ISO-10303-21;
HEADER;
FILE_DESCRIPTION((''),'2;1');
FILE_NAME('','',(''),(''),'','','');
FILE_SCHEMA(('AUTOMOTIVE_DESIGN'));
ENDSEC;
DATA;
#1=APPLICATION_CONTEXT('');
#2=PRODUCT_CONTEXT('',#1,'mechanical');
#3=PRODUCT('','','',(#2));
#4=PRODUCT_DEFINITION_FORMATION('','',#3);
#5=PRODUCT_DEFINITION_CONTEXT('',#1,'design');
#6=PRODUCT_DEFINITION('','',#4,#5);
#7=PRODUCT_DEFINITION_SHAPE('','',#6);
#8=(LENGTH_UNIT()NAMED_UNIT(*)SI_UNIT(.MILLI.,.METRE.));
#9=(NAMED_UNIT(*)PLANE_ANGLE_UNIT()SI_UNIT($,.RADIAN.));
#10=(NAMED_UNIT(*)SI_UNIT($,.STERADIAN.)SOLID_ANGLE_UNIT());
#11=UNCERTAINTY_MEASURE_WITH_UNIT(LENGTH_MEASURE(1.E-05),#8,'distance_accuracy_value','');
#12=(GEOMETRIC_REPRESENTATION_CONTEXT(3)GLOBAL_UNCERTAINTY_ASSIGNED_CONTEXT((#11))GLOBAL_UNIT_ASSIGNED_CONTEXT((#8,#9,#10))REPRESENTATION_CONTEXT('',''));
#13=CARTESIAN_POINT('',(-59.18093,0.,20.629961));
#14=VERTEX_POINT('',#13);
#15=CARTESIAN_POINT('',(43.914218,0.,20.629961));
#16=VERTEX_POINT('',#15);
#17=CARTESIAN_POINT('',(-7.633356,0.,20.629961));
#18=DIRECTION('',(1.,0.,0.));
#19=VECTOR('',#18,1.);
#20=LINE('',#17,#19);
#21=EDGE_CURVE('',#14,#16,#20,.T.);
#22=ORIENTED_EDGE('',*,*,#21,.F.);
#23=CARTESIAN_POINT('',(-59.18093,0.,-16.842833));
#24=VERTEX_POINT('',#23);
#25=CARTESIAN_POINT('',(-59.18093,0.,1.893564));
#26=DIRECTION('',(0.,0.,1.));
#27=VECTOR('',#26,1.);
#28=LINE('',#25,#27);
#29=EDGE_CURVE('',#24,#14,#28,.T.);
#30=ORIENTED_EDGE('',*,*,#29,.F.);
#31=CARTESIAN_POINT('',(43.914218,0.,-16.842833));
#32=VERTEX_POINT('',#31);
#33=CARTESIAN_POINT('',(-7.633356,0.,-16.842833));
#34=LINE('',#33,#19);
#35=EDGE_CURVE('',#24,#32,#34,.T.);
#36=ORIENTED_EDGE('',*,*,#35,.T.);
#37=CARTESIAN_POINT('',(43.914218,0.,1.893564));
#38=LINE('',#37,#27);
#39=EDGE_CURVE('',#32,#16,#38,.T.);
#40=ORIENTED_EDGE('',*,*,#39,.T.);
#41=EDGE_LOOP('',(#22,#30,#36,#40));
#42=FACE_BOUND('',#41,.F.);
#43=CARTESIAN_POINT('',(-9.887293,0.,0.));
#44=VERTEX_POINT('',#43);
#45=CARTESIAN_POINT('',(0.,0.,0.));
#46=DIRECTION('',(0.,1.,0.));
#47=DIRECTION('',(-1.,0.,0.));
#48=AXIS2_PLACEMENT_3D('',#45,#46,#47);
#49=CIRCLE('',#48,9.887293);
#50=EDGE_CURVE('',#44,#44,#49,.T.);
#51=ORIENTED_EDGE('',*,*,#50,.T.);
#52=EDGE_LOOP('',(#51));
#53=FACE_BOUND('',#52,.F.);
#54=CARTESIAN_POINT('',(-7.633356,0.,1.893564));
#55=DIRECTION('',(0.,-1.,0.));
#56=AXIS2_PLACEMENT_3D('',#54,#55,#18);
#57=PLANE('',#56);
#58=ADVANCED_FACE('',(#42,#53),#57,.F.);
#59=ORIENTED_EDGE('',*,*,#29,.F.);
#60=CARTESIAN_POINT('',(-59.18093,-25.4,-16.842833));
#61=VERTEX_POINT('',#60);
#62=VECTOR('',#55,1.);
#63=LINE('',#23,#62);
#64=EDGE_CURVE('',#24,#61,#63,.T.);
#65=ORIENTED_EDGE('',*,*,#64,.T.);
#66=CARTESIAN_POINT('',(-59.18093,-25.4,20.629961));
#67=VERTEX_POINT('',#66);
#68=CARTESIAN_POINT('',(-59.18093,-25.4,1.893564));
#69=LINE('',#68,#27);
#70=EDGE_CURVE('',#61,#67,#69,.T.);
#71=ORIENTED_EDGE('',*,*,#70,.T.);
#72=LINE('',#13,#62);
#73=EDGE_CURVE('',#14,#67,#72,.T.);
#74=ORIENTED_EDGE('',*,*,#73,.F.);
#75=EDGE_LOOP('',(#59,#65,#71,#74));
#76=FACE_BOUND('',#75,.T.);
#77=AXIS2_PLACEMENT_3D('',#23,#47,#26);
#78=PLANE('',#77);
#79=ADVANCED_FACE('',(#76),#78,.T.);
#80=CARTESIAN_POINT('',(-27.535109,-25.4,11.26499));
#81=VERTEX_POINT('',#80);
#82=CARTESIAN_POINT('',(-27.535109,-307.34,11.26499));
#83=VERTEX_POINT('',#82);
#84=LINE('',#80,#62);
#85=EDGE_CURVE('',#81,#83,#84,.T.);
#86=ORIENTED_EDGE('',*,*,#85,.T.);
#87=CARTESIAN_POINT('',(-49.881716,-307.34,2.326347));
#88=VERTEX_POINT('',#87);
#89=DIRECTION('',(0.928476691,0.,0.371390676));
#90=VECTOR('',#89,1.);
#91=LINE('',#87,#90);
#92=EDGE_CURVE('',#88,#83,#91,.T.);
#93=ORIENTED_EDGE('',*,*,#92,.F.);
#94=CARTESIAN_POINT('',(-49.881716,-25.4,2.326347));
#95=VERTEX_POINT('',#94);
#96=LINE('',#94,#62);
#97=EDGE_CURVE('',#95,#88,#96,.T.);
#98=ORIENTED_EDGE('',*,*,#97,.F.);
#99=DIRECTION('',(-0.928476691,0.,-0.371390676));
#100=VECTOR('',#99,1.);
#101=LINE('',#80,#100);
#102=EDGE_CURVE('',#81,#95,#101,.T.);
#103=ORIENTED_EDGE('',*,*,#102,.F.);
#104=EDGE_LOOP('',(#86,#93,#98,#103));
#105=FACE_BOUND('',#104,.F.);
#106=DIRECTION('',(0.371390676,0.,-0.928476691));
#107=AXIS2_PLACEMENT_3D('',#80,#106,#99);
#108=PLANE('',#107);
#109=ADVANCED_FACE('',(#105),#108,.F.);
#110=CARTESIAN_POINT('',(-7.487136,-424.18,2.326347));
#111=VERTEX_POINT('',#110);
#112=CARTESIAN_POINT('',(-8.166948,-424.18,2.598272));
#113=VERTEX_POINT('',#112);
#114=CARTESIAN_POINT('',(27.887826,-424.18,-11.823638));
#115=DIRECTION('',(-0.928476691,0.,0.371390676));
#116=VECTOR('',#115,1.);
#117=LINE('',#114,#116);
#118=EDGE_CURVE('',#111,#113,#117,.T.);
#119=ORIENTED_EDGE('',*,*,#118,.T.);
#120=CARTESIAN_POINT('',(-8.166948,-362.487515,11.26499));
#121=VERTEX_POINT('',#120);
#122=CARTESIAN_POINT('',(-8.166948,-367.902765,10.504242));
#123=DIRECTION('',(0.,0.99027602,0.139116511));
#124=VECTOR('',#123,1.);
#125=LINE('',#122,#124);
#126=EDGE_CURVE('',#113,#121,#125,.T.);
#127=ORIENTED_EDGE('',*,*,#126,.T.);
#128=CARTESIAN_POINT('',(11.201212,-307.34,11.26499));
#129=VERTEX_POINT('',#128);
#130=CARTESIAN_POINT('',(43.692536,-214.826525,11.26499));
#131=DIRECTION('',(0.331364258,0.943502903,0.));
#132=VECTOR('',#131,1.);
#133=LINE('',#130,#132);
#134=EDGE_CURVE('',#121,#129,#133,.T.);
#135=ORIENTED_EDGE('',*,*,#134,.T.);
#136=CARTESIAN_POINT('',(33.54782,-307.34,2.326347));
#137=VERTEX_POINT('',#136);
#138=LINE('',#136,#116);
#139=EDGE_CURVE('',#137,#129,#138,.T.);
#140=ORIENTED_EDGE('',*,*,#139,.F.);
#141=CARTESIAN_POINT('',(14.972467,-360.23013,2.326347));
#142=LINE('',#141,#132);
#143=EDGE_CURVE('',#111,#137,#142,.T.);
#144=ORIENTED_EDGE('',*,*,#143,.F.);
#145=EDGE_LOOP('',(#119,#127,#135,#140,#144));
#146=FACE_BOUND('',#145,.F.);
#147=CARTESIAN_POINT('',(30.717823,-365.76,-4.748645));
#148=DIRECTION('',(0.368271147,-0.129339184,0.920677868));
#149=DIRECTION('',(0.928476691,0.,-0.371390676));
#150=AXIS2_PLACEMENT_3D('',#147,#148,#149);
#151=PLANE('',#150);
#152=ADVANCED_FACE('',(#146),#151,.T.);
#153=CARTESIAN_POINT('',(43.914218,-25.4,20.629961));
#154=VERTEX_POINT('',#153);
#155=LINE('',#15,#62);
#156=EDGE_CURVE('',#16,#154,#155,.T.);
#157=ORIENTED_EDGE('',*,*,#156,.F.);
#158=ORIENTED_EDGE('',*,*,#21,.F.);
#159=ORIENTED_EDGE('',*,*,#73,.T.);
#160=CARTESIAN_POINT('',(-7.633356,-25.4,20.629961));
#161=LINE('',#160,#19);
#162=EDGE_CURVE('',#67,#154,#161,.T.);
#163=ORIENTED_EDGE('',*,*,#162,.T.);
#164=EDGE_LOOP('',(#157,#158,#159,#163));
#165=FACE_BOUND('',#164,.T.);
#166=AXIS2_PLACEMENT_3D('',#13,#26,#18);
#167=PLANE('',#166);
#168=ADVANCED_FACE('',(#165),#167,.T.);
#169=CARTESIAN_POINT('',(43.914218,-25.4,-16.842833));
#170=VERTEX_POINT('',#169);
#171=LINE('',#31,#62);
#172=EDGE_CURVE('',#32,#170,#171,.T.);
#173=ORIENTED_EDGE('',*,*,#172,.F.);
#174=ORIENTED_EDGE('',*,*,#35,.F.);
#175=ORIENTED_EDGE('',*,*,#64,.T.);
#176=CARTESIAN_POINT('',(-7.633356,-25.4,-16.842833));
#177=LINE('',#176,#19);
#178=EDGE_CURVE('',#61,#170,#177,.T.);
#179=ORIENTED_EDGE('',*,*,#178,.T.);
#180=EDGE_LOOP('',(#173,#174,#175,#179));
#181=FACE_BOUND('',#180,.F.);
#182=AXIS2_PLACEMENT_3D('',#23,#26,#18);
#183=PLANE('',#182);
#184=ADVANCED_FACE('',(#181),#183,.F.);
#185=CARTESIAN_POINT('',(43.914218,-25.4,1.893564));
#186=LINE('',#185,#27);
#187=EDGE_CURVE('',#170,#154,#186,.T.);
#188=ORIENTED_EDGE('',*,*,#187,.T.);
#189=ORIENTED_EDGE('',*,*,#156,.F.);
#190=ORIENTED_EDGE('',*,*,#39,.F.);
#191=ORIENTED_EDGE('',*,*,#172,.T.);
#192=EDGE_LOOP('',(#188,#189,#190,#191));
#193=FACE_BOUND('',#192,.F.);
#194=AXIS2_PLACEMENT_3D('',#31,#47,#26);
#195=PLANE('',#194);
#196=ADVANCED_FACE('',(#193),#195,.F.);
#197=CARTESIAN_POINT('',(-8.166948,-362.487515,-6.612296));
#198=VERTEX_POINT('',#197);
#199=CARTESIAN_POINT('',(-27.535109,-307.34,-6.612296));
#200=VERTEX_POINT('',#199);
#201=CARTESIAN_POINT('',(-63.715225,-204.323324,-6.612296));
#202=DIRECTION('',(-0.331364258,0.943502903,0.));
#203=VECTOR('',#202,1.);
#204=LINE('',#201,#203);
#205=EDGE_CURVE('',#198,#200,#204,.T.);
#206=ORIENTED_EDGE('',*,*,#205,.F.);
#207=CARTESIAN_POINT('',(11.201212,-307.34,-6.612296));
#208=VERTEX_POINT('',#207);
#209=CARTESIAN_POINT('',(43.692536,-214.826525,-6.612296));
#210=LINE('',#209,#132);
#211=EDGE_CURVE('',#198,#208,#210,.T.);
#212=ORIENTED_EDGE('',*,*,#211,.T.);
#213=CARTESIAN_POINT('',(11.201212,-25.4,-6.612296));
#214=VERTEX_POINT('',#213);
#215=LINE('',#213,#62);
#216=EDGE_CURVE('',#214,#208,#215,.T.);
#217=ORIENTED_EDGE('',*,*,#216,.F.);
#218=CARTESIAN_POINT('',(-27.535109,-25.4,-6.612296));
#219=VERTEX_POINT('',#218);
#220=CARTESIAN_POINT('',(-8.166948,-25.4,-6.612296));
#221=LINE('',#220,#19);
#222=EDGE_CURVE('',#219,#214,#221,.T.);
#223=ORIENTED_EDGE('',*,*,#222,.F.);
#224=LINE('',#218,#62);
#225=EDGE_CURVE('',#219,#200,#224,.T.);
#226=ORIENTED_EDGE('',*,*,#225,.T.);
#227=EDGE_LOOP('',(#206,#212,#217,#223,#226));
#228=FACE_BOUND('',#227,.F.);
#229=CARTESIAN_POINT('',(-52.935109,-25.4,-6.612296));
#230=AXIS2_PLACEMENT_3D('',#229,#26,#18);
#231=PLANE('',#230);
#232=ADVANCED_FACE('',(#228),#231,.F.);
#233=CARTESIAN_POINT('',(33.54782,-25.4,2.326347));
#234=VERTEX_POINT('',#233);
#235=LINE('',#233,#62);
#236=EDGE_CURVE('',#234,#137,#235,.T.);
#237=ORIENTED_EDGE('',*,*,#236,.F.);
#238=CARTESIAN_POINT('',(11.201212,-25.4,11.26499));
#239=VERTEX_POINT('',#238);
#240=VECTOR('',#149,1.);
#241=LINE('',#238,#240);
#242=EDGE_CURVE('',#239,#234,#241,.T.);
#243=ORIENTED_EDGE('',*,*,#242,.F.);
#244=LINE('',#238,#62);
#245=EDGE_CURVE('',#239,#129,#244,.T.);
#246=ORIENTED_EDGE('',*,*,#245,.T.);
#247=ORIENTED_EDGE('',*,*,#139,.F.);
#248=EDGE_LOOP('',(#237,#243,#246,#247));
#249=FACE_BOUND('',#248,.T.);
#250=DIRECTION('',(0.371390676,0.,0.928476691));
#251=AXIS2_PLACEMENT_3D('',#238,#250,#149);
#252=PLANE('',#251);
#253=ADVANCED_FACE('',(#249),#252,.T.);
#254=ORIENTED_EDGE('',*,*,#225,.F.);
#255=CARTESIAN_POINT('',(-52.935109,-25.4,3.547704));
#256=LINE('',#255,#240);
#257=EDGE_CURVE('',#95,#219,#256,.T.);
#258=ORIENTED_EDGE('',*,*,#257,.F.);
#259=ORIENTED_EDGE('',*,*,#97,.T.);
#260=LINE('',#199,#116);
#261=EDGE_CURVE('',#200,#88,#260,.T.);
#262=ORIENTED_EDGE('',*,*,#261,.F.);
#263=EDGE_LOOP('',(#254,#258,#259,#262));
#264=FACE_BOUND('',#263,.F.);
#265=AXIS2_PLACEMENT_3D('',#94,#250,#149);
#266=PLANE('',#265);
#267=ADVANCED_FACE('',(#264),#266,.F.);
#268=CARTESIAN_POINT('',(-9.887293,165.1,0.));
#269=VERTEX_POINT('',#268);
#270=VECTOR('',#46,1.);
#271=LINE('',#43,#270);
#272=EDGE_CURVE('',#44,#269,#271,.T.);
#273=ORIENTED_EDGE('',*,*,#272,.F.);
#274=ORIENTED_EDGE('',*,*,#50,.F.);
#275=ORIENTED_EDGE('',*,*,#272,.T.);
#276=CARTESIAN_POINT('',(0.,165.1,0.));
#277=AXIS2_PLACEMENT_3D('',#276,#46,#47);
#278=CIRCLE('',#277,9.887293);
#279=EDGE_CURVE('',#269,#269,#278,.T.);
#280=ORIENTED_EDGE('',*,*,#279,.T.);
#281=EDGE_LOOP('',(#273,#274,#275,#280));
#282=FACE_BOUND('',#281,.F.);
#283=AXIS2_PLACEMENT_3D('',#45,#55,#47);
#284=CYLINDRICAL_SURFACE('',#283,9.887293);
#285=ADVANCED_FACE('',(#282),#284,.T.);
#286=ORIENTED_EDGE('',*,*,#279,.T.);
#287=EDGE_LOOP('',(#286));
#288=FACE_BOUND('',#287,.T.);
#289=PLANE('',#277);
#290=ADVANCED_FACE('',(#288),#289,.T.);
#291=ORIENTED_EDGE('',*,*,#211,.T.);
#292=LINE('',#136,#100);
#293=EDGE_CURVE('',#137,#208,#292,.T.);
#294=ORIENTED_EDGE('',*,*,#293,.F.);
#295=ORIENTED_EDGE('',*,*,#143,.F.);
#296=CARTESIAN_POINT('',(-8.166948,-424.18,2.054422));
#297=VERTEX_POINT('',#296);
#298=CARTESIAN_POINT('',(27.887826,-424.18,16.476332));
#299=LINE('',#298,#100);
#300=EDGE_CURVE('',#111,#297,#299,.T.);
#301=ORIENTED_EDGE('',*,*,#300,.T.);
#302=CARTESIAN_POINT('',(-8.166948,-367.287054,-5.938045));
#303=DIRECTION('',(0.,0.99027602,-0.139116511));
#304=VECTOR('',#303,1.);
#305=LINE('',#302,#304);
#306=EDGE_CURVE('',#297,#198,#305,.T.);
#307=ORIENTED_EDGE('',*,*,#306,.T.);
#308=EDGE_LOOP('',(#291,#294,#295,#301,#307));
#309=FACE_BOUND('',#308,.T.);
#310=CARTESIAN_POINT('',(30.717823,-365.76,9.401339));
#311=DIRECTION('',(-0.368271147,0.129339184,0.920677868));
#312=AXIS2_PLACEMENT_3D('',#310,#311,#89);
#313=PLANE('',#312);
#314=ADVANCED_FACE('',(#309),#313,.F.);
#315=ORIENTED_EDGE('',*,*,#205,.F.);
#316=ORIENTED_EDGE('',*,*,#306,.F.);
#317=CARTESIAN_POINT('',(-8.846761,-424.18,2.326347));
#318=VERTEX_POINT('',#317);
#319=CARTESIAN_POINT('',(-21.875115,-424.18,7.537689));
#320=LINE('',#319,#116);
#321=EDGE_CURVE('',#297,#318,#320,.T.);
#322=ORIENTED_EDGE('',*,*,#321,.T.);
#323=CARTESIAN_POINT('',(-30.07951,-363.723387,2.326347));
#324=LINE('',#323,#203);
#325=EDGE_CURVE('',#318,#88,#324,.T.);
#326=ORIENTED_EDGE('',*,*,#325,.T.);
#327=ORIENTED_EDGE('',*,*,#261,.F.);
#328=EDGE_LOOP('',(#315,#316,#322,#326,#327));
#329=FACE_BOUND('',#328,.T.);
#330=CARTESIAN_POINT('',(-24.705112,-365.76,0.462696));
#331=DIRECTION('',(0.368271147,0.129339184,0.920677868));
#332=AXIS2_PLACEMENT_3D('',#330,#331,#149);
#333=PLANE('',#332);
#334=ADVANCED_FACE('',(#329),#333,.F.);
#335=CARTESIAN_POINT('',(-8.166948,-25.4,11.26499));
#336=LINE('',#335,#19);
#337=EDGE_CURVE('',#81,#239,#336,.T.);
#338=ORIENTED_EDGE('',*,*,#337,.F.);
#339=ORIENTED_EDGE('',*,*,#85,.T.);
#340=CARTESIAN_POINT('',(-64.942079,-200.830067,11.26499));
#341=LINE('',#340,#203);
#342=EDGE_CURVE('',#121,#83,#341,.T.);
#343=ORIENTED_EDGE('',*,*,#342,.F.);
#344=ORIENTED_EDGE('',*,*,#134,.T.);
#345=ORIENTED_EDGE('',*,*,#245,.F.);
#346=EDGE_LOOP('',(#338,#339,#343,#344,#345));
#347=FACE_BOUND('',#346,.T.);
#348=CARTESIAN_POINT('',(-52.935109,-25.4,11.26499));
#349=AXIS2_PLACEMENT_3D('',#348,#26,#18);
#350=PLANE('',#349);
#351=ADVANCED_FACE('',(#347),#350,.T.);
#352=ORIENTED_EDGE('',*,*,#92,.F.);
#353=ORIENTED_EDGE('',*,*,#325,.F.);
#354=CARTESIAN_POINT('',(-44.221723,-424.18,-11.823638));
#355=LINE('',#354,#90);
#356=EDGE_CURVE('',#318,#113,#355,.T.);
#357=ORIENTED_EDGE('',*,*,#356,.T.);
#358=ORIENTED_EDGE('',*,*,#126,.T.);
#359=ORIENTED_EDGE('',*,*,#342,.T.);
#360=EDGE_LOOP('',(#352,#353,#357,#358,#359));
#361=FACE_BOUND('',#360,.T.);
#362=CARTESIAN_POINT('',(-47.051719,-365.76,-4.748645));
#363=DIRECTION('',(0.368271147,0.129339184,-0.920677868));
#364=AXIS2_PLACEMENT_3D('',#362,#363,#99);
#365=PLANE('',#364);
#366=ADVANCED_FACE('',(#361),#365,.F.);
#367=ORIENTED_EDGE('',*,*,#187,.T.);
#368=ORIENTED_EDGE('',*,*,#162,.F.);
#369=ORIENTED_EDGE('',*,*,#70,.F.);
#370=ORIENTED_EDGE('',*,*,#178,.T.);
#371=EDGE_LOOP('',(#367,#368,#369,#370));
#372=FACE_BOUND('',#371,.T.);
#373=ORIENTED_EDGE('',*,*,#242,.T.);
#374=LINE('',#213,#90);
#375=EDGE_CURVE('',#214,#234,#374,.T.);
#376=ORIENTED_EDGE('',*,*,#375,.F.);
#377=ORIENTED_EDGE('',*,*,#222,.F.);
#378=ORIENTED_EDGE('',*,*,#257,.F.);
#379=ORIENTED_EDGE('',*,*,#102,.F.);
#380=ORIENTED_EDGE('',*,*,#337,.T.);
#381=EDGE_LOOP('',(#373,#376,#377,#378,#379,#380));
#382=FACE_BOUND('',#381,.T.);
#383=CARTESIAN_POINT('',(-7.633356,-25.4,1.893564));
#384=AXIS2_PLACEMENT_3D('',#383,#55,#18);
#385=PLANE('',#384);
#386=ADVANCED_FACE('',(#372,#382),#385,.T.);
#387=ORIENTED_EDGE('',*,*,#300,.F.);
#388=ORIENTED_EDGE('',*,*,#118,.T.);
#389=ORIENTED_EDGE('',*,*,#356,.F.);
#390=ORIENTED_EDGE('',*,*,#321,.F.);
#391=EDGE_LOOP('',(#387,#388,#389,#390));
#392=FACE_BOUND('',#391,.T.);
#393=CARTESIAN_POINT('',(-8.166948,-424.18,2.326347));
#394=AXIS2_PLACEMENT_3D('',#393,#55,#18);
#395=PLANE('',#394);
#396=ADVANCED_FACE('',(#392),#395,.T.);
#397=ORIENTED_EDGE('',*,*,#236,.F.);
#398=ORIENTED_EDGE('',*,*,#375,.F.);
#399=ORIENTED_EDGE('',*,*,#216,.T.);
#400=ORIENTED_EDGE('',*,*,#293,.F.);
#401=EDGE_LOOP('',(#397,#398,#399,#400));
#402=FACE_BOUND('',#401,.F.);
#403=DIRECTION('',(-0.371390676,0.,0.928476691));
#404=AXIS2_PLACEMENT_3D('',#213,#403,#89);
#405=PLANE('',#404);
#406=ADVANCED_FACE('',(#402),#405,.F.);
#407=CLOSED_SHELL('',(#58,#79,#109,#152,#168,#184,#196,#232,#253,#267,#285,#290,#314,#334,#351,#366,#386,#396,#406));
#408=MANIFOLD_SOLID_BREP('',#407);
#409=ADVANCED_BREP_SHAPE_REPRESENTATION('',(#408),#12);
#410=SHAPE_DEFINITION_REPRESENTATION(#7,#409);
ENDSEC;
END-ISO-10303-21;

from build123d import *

# Parameters (mm, degrees)
F0_W        = 103.0951477587
F0_H        = 37.4727938324
F1_DEPTH    = 25.4
F2_R        = 9.8872931358
F3_DEPTH    = 165.1
F4_W        = 89.5363204181
F4_H        = 17.8772863001
F5_DEPTH    = 398.78
F6_T1_DEPTH = 464.6450864339
F7_SIZE2    = 116.84
F7_SIZE     = 15.24


# Not quite as in the source:
# - a fillet or chamfer that OpenCascade refuses, or shapes differently, is made with other operations: its cross-section is extruded or revolved along the edge and cut away or added


with BuildPart() as f1:
    # F0 (on Front) → F1 (new body)
    with BuildSketch(Plane.XZ):
        with Locations((-7.6333563775, 1.8935641274)):
            Rectangle(F0_W, F0_H)
    extrude(amount=F1_DEPTH)

    # F2 (on face) → F3 (join)
    with BuildSketch(Plane(origin=(0, 0, 0), x_dir=(-1, 0, 0), z_dir=(0, 1, 0))):
        Circle(F2_R)
    extrude(amount=F3_DEPTH)

    # F4 (on face) → F5 (join)
    with BuildSketch(Plane.XZ.offset(25.4)):
        with Locations((-8.1669483334, 2.3263469338)):
            Rectangle(F4_W, F4_H)
    extrude(amount=F5_DEPTH)

    # F6: chamfer of 25.4 x 10.16 on 4 edges, made by hand

    # F6_s2 → F6_t1 (cut)
    with BuildSketch(Plane.XZ.offset(25.4)):
        Polygon((-52.9351085424, 3.5477037838), (-27.5351085424, -6.6122962162), (-52.9351085424, -6.6122962162), align=None)
        Polygon((-27.5351085424, 11.2649900839), (-52.9351085424, 1.1049900839), (-52.9351085424, 11.2649900839), align=None)
        Polygon((11.2012118757, -6.6122962162), (36.6012118757, 3.5477037838), (36.6012118757, -6.6122962162), align=None)
        Polygon((11.2012118757, 11.2649900839), (36.6012118757, 1.1049900839), (36.6012118757, 11.2649900839), align=None)
    extrude(amount=F6_T1_DEPTH, mode=Mode.SUBTRACT)

    # F7 (call 1 of 2: OpenCascade refuses the feature's edges together)
    f7_edges = [f1.edges().sort_by_distance(p)[0] for p in [
        (-38.708412, -424.18, -2.142975),
        (-38.708412, -424.18, 6.795669),
    ]]
    f7_side = f1.faces().sort_by_distance((-8.166948, -424.18, 2.326347))[0]
    chamfer(f7_edges, length=F7_SIZE, length2=F7_SIZE2, reference=f7_side)

    # F7#2 (call 2 of 2)
    f7_2_edges = [f1.edges().sort_by_distance(p)[0] for p in [
        (22.374516, -424.18, -2.142975),
        (22.374516, -424.18, 6.795669),
    ]]
    f7_2_side = f1.faces().sort_by_distance((-8.166948, -424.18, 2.326347))[0]
    chamfer(f7_2_edges, length=F7_SIZE, length2=F7_SIZE2, reference=f7_2_side)


solid = f1.part
